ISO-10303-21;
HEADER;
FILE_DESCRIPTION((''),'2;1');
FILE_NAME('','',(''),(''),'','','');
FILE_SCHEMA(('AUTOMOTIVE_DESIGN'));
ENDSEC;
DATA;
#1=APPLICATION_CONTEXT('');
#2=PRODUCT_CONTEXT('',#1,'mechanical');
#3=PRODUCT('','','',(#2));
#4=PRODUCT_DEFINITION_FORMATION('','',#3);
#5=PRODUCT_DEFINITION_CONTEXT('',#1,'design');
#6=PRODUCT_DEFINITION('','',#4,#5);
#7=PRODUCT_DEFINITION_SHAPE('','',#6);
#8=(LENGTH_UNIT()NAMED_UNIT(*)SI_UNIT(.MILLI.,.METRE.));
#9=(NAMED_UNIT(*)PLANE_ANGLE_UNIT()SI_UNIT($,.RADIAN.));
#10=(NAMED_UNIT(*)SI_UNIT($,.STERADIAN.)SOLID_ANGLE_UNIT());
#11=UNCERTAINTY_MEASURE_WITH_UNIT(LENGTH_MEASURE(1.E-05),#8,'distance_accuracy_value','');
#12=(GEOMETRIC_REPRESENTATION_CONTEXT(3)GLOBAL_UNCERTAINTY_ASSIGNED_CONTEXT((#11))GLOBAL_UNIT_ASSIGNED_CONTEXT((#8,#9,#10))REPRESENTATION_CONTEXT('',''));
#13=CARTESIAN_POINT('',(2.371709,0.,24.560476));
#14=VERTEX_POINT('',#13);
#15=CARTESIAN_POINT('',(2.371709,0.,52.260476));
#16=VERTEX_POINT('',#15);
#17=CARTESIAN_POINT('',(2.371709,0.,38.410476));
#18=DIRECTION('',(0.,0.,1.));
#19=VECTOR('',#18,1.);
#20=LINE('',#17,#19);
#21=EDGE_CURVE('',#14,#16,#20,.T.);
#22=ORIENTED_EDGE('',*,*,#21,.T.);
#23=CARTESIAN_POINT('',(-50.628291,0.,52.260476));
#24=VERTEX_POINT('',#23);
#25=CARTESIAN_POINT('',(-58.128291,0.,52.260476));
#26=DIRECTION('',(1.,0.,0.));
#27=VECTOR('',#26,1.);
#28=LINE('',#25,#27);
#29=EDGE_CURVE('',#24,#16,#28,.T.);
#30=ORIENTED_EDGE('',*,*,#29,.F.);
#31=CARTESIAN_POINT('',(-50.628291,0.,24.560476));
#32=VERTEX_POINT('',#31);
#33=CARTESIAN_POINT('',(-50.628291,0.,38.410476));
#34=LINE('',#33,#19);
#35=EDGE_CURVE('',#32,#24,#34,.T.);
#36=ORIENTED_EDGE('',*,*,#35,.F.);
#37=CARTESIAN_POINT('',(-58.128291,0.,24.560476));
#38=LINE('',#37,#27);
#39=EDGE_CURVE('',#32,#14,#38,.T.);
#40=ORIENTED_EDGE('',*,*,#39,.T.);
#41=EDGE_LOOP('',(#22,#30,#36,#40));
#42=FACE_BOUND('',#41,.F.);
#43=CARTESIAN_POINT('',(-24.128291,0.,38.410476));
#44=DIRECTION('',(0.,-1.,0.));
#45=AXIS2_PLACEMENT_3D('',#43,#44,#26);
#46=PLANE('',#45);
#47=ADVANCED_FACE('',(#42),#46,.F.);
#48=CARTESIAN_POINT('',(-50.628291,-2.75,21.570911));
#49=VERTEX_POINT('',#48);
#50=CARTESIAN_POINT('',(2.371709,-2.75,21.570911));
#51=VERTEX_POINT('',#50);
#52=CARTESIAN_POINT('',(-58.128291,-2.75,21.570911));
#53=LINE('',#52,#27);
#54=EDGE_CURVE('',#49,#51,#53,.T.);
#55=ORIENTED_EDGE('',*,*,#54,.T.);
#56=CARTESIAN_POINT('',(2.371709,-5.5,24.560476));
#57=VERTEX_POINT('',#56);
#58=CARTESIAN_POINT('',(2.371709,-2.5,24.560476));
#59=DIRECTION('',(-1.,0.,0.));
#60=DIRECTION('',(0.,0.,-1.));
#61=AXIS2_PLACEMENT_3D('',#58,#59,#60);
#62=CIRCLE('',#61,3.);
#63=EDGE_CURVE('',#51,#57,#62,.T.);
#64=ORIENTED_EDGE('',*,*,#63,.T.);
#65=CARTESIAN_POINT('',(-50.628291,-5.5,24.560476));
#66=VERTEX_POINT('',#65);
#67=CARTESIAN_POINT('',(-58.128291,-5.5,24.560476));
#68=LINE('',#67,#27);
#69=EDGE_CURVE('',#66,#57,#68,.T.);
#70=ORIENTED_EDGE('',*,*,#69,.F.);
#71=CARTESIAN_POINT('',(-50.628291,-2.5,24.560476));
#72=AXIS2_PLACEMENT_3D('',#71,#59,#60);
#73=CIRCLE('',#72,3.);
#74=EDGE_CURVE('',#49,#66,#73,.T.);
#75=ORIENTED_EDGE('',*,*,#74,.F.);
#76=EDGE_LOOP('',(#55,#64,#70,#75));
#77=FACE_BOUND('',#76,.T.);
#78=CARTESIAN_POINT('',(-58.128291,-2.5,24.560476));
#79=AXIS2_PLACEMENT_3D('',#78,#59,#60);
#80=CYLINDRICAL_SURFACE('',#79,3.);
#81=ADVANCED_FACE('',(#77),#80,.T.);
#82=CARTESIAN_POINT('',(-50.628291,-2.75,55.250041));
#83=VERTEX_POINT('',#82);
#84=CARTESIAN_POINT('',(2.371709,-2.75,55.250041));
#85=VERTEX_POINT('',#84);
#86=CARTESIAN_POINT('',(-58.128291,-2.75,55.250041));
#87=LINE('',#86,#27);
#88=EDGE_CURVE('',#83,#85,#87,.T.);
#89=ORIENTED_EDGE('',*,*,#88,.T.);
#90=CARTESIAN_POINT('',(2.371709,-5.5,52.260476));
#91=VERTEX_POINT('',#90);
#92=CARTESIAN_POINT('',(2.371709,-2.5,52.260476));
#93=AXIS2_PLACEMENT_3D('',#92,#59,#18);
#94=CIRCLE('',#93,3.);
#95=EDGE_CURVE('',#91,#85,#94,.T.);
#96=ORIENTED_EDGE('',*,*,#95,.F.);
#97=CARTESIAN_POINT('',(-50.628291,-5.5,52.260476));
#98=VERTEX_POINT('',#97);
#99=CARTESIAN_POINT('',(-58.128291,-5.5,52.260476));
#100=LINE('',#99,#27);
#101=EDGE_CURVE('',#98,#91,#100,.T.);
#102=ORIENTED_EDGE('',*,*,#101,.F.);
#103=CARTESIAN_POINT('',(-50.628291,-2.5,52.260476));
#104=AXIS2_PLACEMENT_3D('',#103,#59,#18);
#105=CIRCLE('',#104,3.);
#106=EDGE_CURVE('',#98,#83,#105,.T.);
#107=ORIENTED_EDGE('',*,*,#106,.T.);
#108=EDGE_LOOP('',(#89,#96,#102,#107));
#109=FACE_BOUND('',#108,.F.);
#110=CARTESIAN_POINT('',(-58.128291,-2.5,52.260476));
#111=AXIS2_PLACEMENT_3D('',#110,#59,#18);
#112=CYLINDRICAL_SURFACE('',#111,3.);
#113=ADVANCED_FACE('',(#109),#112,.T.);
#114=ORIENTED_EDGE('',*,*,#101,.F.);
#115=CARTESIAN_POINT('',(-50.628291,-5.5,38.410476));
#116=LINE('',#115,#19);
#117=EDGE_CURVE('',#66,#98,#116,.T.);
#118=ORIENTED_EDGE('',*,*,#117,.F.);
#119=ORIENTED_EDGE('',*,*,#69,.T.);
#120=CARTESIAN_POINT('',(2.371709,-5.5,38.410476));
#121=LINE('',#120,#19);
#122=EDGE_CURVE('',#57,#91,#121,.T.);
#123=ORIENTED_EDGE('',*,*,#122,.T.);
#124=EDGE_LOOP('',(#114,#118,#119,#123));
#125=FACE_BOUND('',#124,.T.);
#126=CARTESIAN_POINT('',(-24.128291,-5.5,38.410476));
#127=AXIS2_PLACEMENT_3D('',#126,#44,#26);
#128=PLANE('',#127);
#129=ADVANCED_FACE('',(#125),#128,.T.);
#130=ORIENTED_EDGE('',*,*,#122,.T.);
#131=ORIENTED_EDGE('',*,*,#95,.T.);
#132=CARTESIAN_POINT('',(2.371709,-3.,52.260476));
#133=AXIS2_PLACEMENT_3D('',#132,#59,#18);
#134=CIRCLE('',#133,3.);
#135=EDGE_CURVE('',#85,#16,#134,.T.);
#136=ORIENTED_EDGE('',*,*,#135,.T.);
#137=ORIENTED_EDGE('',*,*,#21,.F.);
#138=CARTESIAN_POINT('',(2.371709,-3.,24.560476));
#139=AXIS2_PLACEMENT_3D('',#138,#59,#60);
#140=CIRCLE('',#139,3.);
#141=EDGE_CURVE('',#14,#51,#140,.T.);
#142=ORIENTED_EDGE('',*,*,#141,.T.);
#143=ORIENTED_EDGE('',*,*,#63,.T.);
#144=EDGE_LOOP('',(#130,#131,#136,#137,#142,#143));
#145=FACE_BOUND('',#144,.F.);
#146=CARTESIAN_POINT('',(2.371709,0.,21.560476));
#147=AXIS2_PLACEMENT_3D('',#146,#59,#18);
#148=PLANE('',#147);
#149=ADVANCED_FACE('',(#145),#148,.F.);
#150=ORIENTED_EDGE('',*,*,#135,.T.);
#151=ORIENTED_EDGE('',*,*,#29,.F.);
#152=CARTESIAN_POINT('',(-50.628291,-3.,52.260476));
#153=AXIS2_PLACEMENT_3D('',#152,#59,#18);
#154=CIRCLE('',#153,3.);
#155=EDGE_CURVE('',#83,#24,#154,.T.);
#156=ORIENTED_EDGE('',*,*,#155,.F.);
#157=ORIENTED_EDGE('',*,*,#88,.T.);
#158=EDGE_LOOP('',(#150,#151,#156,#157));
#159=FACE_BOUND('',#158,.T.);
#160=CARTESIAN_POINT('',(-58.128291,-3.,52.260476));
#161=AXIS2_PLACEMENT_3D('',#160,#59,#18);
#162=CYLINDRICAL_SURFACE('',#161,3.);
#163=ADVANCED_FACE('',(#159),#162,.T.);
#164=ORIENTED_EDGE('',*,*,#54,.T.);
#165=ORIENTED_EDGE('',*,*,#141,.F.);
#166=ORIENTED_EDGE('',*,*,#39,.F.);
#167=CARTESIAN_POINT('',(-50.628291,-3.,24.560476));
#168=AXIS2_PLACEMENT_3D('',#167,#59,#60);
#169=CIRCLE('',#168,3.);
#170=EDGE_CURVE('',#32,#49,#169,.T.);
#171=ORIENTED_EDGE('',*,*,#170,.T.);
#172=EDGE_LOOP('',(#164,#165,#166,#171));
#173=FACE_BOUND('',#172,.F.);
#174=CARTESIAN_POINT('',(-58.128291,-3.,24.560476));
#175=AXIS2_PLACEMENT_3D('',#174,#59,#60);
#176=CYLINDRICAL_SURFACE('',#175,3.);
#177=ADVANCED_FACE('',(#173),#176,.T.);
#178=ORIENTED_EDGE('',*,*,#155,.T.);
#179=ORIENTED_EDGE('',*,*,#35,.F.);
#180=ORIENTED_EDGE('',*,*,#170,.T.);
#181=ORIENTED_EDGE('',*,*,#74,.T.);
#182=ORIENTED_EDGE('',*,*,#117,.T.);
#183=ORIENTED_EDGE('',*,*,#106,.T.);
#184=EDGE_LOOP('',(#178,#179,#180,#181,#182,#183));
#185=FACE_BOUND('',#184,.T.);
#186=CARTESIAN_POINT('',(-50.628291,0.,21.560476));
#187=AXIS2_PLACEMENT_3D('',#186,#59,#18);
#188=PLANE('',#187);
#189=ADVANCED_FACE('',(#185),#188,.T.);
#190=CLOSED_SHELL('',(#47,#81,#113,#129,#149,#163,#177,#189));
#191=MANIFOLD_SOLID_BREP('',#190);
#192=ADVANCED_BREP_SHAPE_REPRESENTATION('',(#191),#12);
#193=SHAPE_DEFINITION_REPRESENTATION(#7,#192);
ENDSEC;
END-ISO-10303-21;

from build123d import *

# Parameters (mm, degrees)
F0_W        = 53
F0_H        = 33.7
F1_DEPTH    = 5.5
F2_T1_DEPTH = 68


# Not quite as in the source:
# - a fillet or chamfer that OpenCascade refuses, or shapes differently, is made with other operations: its cross-section is extruded or revolved along the edge and cut away or added


with BuildPart() as f1:
    # F0 (on Front) → F1 (new body)
    with BuildSketch(Plane.XZ):
        with Locations((-24.1282908246, 38.41047619)):
            Rectangle(F0_W, F0_H)
    extrude(amount=F1_DEPTH)

    # F2: fillet of radius 3 on 4 edges, made by hand

    # F2_s2 → F2_t1 (cut)
    with BuildSketch(Plane.YZ.offset(-58.1282908246)):
        with BuildLine():
            ThreePointArc((-2.5, 55.26047619), (-4.6213203436, 54.3817965336), (-5.5, 52.26047619))
            Line((-5.5, 52.26047619), (-5.5, 55.26047619))
            Line((-5.5, 55.26047619), (-2.5, 55.26047619))
        make_face()
        with BuildLine():
            ThreePointArc((-3, 55.26047619), (-0.8786796564, 54.3817965336), (0, 52.26047619))
            Line((0, 52.26047619), (0, 55.26047619))
            Line((0, 55.26047619), (-3, 55.26047619))
        make_face()
        with BuildLine():
            ThreePointArc((-3, 21.56047619), (-0.8786796564, 22.4391558465), (0, 24.56047619))
            Line((0, 24.56047619), (0, 21.56047619))
            Line((0, 21.56047619), (-3, 21.56047619))
        make_face()
        with BuildLine():
            ThreePointArc((-2.5, 21.56047619), (-4.6213203436, 22.4391558465), (-5.5, 24.56047619))
            Line((-5.5, 24.56047619), (-5.5, 21.56047619))
            Line((-5.5, 21.56047619), (-2.5, 21.56047619))
        make_face()
    extrude(amount=F2_T1_DEPTH, mode=Mode.SUBTRACT)


solid = f1.part
